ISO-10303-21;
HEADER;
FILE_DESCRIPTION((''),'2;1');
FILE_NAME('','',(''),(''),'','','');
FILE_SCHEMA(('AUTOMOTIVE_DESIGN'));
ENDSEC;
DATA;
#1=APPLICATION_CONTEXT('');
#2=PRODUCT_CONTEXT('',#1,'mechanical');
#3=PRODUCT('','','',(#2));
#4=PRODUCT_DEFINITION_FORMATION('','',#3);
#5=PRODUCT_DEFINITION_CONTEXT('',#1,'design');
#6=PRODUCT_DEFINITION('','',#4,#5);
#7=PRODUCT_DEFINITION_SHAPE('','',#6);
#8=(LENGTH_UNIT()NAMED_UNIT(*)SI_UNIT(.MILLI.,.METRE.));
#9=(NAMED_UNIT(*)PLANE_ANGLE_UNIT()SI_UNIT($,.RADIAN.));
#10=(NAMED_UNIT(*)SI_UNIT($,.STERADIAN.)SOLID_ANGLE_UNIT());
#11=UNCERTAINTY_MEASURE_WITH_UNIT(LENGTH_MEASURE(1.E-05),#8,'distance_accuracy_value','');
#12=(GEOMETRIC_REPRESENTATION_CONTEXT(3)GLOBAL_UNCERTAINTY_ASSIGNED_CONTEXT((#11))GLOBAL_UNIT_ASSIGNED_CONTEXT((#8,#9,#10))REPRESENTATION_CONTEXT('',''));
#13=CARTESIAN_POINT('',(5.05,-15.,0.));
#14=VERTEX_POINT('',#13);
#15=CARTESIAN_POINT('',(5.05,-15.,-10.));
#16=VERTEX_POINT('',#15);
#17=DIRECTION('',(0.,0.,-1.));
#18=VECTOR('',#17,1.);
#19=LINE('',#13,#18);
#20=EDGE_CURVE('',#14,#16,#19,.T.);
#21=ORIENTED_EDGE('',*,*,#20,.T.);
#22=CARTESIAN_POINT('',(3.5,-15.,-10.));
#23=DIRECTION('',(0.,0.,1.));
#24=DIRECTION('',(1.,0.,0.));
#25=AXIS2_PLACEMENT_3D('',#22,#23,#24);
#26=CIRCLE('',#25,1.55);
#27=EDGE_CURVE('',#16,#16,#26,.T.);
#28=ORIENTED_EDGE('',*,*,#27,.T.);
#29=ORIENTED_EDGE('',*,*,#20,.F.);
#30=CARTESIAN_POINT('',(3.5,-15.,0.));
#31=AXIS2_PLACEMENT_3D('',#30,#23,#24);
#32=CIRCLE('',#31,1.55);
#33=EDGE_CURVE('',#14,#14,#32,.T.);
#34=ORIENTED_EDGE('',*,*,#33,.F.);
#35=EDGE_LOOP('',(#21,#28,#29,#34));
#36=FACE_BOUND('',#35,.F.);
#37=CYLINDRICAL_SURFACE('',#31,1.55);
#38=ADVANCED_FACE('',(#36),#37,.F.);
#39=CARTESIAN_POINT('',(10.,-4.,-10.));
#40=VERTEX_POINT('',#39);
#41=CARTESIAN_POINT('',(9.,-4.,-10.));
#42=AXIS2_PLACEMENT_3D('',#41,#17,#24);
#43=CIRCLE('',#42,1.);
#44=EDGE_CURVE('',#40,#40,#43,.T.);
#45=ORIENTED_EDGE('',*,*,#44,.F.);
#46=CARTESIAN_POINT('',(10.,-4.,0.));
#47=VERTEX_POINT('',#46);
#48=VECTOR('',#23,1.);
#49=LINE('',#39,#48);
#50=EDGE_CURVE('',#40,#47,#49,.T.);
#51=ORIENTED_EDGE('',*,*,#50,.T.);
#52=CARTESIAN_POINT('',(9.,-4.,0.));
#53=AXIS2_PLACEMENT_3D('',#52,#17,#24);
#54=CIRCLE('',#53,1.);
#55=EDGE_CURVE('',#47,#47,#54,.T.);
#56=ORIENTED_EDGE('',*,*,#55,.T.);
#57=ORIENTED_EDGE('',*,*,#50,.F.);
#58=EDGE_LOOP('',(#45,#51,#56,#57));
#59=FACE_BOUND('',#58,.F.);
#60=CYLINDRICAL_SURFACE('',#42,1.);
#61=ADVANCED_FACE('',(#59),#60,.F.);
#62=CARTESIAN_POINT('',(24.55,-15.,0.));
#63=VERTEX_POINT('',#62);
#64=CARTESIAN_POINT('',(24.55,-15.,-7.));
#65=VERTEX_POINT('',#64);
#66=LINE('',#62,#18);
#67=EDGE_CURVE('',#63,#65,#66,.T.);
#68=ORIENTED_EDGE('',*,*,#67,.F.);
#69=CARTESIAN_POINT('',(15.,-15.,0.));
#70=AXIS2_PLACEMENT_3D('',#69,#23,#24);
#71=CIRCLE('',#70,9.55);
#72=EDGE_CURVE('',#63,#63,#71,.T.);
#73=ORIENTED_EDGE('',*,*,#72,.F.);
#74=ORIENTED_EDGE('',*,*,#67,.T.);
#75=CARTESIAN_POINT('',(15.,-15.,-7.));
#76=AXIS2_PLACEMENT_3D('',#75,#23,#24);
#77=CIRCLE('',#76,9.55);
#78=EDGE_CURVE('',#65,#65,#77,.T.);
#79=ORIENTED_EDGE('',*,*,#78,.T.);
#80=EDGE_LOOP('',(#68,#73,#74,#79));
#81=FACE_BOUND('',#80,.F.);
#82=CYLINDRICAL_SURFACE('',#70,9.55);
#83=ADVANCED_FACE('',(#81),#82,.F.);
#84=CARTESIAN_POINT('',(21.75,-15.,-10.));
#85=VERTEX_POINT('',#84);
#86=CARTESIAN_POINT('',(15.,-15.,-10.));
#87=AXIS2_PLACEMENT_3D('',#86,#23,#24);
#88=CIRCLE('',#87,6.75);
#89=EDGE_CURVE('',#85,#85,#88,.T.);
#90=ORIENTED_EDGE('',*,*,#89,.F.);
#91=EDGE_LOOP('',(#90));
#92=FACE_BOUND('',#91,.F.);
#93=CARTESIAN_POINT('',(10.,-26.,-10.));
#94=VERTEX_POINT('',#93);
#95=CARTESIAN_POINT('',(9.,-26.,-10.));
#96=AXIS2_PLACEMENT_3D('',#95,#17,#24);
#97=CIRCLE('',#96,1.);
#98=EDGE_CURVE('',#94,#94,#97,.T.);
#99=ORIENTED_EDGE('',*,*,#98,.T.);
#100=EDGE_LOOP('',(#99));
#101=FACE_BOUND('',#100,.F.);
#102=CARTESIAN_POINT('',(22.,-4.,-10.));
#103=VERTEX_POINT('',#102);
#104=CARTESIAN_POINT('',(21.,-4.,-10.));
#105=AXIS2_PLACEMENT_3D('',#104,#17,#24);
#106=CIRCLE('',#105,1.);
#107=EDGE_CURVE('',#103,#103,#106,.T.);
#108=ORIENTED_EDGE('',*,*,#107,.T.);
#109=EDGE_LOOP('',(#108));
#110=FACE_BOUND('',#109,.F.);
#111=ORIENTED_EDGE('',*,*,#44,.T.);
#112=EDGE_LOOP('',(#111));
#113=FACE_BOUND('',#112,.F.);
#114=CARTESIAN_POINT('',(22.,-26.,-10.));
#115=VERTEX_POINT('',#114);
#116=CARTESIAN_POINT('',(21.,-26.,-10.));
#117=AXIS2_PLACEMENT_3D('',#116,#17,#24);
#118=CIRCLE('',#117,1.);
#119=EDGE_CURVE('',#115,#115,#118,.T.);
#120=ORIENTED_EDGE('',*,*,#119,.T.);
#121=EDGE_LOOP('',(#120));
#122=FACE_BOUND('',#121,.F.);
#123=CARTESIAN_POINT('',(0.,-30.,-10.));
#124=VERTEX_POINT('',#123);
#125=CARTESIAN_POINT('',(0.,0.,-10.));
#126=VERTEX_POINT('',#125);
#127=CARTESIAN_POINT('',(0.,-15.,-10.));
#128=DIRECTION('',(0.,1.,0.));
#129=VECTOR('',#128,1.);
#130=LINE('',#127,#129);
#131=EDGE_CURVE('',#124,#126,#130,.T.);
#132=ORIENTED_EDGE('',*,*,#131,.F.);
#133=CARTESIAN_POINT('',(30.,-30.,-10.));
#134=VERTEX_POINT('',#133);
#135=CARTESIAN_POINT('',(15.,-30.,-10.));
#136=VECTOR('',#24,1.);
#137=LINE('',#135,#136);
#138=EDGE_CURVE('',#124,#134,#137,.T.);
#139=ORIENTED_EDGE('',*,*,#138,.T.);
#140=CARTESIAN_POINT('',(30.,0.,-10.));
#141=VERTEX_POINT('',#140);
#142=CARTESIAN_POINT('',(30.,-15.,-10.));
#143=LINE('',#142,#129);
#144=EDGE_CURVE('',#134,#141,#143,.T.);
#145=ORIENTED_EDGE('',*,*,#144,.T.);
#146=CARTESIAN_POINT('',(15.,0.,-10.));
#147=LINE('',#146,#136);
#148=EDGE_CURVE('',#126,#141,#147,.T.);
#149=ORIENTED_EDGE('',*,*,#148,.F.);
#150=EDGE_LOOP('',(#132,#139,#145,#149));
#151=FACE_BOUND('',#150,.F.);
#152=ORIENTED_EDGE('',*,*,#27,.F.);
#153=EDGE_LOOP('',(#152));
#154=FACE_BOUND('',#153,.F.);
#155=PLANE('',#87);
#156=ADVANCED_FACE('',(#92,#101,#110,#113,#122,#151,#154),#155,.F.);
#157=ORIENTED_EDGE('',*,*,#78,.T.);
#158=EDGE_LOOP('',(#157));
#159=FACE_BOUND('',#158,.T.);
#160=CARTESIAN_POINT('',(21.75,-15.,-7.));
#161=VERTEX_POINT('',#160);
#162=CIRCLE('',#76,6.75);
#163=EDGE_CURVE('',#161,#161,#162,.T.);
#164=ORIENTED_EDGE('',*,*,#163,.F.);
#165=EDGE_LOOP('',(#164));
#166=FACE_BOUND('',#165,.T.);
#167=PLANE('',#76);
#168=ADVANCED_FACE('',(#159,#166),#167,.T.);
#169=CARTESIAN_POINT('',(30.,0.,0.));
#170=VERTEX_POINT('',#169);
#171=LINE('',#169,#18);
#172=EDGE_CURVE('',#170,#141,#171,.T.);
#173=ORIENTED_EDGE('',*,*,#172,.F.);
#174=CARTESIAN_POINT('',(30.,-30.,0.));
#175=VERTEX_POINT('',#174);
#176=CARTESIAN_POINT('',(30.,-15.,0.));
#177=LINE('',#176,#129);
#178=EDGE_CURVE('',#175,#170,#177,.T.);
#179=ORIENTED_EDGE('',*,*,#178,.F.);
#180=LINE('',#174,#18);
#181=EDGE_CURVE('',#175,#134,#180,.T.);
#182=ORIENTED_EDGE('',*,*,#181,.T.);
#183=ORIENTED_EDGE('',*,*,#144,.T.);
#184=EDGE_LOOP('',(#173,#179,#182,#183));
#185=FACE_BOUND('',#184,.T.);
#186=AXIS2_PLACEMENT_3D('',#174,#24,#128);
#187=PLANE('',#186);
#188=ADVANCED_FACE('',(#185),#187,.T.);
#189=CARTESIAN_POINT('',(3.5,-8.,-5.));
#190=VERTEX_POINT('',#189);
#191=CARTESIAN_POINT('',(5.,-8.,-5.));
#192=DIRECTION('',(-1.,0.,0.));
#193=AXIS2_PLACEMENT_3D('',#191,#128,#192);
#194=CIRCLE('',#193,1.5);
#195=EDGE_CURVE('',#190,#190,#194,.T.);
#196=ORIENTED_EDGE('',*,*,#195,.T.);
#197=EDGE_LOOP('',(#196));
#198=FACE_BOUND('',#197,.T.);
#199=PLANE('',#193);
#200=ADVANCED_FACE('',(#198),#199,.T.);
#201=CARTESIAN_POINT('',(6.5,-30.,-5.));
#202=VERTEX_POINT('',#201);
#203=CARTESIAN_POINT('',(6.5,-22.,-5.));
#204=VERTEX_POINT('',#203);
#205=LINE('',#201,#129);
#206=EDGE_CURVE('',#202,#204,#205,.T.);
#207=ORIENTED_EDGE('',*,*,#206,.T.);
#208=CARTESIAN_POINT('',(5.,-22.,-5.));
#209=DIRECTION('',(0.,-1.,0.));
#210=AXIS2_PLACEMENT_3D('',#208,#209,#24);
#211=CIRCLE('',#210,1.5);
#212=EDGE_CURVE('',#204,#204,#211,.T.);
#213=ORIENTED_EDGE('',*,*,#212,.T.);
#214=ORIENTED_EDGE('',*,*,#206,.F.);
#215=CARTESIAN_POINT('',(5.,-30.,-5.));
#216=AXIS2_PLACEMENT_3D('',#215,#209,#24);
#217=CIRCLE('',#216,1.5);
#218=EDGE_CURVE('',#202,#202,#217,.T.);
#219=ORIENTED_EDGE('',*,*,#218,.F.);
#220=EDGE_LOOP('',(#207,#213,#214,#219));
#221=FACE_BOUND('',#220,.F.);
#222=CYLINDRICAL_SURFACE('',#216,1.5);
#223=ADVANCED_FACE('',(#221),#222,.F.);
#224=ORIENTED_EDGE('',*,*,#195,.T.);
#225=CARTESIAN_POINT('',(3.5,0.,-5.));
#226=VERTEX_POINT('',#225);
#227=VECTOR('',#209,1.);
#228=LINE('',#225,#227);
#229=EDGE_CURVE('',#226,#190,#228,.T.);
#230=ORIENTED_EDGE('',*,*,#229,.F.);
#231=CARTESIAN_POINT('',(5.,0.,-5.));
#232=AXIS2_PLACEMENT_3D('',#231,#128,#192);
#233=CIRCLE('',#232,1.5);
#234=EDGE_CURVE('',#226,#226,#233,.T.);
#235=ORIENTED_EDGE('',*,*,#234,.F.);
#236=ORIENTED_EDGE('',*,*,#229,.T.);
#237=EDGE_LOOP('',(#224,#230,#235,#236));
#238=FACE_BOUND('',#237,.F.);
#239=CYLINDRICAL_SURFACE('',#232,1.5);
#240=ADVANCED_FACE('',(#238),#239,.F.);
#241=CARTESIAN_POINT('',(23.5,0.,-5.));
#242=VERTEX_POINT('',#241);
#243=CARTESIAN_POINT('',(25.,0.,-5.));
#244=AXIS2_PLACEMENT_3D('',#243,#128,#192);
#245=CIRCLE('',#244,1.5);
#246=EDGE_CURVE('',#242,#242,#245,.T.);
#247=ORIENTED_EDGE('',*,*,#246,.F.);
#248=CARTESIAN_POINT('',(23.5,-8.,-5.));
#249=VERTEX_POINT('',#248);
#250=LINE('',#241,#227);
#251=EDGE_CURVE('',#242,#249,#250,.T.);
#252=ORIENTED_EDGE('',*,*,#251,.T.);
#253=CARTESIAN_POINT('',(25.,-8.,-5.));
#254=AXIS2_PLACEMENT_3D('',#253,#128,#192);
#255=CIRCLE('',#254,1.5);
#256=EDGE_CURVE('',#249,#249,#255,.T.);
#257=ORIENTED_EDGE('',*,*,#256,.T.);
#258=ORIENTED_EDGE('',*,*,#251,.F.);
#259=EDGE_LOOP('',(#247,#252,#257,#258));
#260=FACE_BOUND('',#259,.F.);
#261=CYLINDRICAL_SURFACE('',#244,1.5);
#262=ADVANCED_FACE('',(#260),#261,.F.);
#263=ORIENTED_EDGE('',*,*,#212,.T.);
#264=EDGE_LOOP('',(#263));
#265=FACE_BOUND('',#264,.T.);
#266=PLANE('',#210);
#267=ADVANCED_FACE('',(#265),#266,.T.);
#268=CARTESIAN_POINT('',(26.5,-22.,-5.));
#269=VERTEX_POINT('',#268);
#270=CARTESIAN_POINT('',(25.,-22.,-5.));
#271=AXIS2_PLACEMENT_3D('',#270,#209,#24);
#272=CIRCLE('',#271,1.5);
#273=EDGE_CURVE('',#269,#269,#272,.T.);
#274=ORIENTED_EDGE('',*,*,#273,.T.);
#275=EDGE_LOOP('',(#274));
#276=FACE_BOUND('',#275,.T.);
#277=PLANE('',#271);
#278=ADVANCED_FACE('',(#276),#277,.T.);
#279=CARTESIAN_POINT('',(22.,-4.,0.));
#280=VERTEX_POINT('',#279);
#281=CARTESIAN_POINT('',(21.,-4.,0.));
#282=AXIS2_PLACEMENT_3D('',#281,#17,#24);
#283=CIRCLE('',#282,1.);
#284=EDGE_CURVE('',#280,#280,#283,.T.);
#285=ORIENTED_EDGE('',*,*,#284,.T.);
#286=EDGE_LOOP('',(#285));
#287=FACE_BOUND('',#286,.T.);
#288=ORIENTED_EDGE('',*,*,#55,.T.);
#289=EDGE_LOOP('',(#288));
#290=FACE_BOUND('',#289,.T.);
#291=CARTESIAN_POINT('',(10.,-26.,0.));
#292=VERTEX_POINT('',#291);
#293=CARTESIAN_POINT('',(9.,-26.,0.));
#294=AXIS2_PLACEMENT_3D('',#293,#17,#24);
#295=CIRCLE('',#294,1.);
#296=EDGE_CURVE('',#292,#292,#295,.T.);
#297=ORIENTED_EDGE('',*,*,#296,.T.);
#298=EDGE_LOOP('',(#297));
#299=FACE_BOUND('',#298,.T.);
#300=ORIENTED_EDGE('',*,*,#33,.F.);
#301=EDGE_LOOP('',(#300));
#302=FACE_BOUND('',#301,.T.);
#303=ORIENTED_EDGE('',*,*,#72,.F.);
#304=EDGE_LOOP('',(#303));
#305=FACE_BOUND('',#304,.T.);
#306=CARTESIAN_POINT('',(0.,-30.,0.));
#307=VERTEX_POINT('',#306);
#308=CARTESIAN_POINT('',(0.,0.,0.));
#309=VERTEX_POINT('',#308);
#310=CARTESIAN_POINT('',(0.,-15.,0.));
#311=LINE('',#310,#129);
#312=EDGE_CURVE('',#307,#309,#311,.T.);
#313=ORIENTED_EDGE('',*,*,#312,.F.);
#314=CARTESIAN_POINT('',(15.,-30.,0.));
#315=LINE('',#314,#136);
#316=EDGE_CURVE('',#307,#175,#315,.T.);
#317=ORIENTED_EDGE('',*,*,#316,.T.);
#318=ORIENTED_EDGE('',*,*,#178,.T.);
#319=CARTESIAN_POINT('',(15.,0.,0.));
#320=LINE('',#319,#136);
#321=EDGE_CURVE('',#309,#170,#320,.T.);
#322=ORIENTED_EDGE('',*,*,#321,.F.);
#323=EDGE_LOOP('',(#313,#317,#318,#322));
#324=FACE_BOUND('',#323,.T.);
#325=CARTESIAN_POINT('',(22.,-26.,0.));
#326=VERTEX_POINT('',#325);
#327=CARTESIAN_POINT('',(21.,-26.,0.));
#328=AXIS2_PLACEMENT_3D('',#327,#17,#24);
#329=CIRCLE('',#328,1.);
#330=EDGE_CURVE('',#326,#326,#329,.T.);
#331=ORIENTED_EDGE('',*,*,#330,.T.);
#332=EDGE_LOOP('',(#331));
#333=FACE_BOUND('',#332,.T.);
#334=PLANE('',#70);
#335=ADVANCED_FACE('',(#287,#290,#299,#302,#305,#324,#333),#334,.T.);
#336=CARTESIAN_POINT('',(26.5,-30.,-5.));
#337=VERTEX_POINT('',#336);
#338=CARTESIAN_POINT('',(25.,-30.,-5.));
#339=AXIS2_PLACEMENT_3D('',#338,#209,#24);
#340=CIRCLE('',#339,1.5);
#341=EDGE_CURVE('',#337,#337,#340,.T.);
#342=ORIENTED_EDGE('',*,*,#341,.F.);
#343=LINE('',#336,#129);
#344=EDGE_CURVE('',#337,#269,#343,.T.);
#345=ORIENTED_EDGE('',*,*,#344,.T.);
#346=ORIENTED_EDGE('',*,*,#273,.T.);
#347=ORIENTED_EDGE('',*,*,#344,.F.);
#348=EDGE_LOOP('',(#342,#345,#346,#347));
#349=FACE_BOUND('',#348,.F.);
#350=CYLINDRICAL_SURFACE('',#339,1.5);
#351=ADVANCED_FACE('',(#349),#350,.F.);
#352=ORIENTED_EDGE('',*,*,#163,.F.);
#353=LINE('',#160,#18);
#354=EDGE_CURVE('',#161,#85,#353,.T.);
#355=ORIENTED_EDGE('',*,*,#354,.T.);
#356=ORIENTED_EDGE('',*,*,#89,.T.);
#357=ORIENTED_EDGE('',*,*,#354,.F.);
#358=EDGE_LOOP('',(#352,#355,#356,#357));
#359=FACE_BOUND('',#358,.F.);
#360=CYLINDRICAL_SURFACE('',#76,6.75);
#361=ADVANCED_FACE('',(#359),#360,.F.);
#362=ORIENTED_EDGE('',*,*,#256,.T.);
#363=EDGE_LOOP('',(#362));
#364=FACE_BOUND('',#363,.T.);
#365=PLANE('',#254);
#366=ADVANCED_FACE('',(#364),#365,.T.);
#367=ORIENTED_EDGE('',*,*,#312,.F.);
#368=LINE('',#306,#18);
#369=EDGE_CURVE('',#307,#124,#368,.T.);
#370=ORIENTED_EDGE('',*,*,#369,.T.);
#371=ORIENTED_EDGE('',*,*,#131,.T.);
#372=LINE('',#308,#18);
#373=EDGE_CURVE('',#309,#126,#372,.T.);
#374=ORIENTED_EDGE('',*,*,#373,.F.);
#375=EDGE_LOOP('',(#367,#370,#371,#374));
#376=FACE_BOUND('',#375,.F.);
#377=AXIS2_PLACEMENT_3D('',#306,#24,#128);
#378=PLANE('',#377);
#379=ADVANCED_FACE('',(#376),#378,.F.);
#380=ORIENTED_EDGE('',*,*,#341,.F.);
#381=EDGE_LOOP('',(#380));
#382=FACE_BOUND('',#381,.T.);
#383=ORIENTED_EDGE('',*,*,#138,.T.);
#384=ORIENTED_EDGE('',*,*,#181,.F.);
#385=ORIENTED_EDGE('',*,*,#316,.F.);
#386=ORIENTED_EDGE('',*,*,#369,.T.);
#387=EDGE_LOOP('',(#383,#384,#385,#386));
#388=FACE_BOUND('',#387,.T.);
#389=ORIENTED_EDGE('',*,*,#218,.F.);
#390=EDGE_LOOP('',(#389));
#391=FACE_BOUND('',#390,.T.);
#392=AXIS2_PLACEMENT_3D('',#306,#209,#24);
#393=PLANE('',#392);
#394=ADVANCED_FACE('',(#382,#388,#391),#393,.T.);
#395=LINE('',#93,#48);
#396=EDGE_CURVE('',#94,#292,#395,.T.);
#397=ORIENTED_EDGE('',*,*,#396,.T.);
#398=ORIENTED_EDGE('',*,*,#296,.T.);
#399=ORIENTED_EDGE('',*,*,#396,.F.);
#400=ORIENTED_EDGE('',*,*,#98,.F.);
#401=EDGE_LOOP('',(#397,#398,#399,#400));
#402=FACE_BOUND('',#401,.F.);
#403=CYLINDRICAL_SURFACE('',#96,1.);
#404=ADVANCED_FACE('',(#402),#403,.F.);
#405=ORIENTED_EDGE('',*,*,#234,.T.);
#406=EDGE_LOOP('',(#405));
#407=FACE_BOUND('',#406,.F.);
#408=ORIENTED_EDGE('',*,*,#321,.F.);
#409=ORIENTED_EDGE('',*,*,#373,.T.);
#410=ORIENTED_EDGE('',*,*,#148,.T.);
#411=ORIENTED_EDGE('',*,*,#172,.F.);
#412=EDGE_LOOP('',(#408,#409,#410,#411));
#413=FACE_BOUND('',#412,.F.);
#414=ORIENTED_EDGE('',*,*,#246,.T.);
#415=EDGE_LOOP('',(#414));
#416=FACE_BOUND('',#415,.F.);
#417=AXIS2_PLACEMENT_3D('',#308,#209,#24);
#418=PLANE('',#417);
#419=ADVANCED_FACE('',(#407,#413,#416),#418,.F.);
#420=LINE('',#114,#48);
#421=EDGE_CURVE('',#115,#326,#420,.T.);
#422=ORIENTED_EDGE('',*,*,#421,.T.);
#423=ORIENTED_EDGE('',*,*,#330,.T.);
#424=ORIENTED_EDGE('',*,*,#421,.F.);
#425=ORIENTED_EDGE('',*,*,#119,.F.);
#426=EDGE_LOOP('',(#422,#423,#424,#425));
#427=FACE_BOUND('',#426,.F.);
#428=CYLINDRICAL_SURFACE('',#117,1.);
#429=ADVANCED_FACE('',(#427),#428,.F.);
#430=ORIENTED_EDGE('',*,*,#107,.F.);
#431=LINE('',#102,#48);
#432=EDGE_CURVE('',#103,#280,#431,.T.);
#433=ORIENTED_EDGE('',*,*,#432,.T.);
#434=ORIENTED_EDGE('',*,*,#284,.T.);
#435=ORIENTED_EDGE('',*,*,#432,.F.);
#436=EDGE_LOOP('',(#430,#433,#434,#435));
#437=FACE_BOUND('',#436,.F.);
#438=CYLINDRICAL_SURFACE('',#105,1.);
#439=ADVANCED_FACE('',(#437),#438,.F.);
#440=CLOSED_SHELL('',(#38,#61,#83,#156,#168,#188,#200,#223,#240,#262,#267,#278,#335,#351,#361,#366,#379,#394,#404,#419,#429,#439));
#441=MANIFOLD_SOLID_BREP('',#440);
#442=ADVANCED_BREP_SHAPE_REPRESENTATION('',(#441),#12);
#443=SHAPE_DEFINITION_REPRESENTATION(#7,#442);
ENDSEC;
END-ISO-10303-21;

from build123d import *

# Parameters (mm, degrees)
F0_W      = 30
F0_H      = 30
F1_DEPTH  = 10
F2_R      = 9.55
F3_DEPTH  = 7
F4_R      = 6.75
F5_DEPTH  = 3
F7_DEPTH  = 10
F8_R      = 1.5
F9_DEPTH  = 8
F10_R     = 1.5
F11_DEPTH = 8
F12_R     = 1
F13_DEPTH = 10


with BuildPart() as f1:
    # F0 (on Top) → F1 (new body)
    with BuildSketch(Plane.XY):
        with Locations((15, -15)):
            Rectangle(F0_W, F0_H)
    extrude(amount=-F1_DEPTH)

    # F2 (on face) → F3 (cut)
    with BuildSketch(Plane.XY):
        with Locations((15, -15)):
            Circle(F2_R)
    extrude(amount=-F3_DEPTH, mode=Mode.SUBTRACT)

    # F4 (on face) → F5 (cut, through all)
    with BuildSketch(Plane.XY.offset(-7)):
        with Locations((15, -15)):
            Circle(F4_R)
    extrude(amount=-F5_DEPTH, mode=Mode.SUBTRACT)

    # F6 (on face) → F7 (cut, through all)
    with BuildSketch(Plane.XY):
        with BuildLine():
            ThreePointArc((1.95, -15), (3.5, -16.55), (5.05, -15))
            ThreePointArc((5.05, -15), (3.5, -13.45), (1.95, -15))
        make_face()
    extrude(amount=-F7_DEPTH, mode=Mode.SUBTRACT)

    # F8 (on face) → F9 (cut)
    with BuildSketch(Plane.XZ.offset(30)):
        with Locations((5, -5)):
            Circle(F8_R)
        with Locations((25, -5)):
            Circle(F8_R)
    extrude(amount=-F9_DEPTH, mode=Mode.SUBTRACT)

    # F10 (on face) → F11 (cut)
    with BuildSketch(Plane(origin=(0, 0, 0), x_dir=(-1, 0, 0), z_dir=(0, 1, 0))):
        with Locations((-25, -5)):
            Circle(F10_R)
        with Locations((-5, -5)):
            Circle(F10_R)
    extrude(amount=-F11_DEPTH, mode=Mode.SUBTRACT)

    # F12 (on face) → F13 (cut, through all)
    with BuildSketch(Plane(origin=(0, 0, -10), x_dir=(1, 0, 0), z_dir=(0, 0, -1))):
        with Locations((9, 4)):
            Circle(F12_R)
        with Locations((21, 4)):
            Circle(F12_R)
        with Locations((21, 26)):
            Circle(F12_R)
        with Locations((9, 26)):
            Circle(F12_R)
    extrude(amount=-F13_DEPTH, mode=Mode.SUBTRACT)


solid = f1.part
